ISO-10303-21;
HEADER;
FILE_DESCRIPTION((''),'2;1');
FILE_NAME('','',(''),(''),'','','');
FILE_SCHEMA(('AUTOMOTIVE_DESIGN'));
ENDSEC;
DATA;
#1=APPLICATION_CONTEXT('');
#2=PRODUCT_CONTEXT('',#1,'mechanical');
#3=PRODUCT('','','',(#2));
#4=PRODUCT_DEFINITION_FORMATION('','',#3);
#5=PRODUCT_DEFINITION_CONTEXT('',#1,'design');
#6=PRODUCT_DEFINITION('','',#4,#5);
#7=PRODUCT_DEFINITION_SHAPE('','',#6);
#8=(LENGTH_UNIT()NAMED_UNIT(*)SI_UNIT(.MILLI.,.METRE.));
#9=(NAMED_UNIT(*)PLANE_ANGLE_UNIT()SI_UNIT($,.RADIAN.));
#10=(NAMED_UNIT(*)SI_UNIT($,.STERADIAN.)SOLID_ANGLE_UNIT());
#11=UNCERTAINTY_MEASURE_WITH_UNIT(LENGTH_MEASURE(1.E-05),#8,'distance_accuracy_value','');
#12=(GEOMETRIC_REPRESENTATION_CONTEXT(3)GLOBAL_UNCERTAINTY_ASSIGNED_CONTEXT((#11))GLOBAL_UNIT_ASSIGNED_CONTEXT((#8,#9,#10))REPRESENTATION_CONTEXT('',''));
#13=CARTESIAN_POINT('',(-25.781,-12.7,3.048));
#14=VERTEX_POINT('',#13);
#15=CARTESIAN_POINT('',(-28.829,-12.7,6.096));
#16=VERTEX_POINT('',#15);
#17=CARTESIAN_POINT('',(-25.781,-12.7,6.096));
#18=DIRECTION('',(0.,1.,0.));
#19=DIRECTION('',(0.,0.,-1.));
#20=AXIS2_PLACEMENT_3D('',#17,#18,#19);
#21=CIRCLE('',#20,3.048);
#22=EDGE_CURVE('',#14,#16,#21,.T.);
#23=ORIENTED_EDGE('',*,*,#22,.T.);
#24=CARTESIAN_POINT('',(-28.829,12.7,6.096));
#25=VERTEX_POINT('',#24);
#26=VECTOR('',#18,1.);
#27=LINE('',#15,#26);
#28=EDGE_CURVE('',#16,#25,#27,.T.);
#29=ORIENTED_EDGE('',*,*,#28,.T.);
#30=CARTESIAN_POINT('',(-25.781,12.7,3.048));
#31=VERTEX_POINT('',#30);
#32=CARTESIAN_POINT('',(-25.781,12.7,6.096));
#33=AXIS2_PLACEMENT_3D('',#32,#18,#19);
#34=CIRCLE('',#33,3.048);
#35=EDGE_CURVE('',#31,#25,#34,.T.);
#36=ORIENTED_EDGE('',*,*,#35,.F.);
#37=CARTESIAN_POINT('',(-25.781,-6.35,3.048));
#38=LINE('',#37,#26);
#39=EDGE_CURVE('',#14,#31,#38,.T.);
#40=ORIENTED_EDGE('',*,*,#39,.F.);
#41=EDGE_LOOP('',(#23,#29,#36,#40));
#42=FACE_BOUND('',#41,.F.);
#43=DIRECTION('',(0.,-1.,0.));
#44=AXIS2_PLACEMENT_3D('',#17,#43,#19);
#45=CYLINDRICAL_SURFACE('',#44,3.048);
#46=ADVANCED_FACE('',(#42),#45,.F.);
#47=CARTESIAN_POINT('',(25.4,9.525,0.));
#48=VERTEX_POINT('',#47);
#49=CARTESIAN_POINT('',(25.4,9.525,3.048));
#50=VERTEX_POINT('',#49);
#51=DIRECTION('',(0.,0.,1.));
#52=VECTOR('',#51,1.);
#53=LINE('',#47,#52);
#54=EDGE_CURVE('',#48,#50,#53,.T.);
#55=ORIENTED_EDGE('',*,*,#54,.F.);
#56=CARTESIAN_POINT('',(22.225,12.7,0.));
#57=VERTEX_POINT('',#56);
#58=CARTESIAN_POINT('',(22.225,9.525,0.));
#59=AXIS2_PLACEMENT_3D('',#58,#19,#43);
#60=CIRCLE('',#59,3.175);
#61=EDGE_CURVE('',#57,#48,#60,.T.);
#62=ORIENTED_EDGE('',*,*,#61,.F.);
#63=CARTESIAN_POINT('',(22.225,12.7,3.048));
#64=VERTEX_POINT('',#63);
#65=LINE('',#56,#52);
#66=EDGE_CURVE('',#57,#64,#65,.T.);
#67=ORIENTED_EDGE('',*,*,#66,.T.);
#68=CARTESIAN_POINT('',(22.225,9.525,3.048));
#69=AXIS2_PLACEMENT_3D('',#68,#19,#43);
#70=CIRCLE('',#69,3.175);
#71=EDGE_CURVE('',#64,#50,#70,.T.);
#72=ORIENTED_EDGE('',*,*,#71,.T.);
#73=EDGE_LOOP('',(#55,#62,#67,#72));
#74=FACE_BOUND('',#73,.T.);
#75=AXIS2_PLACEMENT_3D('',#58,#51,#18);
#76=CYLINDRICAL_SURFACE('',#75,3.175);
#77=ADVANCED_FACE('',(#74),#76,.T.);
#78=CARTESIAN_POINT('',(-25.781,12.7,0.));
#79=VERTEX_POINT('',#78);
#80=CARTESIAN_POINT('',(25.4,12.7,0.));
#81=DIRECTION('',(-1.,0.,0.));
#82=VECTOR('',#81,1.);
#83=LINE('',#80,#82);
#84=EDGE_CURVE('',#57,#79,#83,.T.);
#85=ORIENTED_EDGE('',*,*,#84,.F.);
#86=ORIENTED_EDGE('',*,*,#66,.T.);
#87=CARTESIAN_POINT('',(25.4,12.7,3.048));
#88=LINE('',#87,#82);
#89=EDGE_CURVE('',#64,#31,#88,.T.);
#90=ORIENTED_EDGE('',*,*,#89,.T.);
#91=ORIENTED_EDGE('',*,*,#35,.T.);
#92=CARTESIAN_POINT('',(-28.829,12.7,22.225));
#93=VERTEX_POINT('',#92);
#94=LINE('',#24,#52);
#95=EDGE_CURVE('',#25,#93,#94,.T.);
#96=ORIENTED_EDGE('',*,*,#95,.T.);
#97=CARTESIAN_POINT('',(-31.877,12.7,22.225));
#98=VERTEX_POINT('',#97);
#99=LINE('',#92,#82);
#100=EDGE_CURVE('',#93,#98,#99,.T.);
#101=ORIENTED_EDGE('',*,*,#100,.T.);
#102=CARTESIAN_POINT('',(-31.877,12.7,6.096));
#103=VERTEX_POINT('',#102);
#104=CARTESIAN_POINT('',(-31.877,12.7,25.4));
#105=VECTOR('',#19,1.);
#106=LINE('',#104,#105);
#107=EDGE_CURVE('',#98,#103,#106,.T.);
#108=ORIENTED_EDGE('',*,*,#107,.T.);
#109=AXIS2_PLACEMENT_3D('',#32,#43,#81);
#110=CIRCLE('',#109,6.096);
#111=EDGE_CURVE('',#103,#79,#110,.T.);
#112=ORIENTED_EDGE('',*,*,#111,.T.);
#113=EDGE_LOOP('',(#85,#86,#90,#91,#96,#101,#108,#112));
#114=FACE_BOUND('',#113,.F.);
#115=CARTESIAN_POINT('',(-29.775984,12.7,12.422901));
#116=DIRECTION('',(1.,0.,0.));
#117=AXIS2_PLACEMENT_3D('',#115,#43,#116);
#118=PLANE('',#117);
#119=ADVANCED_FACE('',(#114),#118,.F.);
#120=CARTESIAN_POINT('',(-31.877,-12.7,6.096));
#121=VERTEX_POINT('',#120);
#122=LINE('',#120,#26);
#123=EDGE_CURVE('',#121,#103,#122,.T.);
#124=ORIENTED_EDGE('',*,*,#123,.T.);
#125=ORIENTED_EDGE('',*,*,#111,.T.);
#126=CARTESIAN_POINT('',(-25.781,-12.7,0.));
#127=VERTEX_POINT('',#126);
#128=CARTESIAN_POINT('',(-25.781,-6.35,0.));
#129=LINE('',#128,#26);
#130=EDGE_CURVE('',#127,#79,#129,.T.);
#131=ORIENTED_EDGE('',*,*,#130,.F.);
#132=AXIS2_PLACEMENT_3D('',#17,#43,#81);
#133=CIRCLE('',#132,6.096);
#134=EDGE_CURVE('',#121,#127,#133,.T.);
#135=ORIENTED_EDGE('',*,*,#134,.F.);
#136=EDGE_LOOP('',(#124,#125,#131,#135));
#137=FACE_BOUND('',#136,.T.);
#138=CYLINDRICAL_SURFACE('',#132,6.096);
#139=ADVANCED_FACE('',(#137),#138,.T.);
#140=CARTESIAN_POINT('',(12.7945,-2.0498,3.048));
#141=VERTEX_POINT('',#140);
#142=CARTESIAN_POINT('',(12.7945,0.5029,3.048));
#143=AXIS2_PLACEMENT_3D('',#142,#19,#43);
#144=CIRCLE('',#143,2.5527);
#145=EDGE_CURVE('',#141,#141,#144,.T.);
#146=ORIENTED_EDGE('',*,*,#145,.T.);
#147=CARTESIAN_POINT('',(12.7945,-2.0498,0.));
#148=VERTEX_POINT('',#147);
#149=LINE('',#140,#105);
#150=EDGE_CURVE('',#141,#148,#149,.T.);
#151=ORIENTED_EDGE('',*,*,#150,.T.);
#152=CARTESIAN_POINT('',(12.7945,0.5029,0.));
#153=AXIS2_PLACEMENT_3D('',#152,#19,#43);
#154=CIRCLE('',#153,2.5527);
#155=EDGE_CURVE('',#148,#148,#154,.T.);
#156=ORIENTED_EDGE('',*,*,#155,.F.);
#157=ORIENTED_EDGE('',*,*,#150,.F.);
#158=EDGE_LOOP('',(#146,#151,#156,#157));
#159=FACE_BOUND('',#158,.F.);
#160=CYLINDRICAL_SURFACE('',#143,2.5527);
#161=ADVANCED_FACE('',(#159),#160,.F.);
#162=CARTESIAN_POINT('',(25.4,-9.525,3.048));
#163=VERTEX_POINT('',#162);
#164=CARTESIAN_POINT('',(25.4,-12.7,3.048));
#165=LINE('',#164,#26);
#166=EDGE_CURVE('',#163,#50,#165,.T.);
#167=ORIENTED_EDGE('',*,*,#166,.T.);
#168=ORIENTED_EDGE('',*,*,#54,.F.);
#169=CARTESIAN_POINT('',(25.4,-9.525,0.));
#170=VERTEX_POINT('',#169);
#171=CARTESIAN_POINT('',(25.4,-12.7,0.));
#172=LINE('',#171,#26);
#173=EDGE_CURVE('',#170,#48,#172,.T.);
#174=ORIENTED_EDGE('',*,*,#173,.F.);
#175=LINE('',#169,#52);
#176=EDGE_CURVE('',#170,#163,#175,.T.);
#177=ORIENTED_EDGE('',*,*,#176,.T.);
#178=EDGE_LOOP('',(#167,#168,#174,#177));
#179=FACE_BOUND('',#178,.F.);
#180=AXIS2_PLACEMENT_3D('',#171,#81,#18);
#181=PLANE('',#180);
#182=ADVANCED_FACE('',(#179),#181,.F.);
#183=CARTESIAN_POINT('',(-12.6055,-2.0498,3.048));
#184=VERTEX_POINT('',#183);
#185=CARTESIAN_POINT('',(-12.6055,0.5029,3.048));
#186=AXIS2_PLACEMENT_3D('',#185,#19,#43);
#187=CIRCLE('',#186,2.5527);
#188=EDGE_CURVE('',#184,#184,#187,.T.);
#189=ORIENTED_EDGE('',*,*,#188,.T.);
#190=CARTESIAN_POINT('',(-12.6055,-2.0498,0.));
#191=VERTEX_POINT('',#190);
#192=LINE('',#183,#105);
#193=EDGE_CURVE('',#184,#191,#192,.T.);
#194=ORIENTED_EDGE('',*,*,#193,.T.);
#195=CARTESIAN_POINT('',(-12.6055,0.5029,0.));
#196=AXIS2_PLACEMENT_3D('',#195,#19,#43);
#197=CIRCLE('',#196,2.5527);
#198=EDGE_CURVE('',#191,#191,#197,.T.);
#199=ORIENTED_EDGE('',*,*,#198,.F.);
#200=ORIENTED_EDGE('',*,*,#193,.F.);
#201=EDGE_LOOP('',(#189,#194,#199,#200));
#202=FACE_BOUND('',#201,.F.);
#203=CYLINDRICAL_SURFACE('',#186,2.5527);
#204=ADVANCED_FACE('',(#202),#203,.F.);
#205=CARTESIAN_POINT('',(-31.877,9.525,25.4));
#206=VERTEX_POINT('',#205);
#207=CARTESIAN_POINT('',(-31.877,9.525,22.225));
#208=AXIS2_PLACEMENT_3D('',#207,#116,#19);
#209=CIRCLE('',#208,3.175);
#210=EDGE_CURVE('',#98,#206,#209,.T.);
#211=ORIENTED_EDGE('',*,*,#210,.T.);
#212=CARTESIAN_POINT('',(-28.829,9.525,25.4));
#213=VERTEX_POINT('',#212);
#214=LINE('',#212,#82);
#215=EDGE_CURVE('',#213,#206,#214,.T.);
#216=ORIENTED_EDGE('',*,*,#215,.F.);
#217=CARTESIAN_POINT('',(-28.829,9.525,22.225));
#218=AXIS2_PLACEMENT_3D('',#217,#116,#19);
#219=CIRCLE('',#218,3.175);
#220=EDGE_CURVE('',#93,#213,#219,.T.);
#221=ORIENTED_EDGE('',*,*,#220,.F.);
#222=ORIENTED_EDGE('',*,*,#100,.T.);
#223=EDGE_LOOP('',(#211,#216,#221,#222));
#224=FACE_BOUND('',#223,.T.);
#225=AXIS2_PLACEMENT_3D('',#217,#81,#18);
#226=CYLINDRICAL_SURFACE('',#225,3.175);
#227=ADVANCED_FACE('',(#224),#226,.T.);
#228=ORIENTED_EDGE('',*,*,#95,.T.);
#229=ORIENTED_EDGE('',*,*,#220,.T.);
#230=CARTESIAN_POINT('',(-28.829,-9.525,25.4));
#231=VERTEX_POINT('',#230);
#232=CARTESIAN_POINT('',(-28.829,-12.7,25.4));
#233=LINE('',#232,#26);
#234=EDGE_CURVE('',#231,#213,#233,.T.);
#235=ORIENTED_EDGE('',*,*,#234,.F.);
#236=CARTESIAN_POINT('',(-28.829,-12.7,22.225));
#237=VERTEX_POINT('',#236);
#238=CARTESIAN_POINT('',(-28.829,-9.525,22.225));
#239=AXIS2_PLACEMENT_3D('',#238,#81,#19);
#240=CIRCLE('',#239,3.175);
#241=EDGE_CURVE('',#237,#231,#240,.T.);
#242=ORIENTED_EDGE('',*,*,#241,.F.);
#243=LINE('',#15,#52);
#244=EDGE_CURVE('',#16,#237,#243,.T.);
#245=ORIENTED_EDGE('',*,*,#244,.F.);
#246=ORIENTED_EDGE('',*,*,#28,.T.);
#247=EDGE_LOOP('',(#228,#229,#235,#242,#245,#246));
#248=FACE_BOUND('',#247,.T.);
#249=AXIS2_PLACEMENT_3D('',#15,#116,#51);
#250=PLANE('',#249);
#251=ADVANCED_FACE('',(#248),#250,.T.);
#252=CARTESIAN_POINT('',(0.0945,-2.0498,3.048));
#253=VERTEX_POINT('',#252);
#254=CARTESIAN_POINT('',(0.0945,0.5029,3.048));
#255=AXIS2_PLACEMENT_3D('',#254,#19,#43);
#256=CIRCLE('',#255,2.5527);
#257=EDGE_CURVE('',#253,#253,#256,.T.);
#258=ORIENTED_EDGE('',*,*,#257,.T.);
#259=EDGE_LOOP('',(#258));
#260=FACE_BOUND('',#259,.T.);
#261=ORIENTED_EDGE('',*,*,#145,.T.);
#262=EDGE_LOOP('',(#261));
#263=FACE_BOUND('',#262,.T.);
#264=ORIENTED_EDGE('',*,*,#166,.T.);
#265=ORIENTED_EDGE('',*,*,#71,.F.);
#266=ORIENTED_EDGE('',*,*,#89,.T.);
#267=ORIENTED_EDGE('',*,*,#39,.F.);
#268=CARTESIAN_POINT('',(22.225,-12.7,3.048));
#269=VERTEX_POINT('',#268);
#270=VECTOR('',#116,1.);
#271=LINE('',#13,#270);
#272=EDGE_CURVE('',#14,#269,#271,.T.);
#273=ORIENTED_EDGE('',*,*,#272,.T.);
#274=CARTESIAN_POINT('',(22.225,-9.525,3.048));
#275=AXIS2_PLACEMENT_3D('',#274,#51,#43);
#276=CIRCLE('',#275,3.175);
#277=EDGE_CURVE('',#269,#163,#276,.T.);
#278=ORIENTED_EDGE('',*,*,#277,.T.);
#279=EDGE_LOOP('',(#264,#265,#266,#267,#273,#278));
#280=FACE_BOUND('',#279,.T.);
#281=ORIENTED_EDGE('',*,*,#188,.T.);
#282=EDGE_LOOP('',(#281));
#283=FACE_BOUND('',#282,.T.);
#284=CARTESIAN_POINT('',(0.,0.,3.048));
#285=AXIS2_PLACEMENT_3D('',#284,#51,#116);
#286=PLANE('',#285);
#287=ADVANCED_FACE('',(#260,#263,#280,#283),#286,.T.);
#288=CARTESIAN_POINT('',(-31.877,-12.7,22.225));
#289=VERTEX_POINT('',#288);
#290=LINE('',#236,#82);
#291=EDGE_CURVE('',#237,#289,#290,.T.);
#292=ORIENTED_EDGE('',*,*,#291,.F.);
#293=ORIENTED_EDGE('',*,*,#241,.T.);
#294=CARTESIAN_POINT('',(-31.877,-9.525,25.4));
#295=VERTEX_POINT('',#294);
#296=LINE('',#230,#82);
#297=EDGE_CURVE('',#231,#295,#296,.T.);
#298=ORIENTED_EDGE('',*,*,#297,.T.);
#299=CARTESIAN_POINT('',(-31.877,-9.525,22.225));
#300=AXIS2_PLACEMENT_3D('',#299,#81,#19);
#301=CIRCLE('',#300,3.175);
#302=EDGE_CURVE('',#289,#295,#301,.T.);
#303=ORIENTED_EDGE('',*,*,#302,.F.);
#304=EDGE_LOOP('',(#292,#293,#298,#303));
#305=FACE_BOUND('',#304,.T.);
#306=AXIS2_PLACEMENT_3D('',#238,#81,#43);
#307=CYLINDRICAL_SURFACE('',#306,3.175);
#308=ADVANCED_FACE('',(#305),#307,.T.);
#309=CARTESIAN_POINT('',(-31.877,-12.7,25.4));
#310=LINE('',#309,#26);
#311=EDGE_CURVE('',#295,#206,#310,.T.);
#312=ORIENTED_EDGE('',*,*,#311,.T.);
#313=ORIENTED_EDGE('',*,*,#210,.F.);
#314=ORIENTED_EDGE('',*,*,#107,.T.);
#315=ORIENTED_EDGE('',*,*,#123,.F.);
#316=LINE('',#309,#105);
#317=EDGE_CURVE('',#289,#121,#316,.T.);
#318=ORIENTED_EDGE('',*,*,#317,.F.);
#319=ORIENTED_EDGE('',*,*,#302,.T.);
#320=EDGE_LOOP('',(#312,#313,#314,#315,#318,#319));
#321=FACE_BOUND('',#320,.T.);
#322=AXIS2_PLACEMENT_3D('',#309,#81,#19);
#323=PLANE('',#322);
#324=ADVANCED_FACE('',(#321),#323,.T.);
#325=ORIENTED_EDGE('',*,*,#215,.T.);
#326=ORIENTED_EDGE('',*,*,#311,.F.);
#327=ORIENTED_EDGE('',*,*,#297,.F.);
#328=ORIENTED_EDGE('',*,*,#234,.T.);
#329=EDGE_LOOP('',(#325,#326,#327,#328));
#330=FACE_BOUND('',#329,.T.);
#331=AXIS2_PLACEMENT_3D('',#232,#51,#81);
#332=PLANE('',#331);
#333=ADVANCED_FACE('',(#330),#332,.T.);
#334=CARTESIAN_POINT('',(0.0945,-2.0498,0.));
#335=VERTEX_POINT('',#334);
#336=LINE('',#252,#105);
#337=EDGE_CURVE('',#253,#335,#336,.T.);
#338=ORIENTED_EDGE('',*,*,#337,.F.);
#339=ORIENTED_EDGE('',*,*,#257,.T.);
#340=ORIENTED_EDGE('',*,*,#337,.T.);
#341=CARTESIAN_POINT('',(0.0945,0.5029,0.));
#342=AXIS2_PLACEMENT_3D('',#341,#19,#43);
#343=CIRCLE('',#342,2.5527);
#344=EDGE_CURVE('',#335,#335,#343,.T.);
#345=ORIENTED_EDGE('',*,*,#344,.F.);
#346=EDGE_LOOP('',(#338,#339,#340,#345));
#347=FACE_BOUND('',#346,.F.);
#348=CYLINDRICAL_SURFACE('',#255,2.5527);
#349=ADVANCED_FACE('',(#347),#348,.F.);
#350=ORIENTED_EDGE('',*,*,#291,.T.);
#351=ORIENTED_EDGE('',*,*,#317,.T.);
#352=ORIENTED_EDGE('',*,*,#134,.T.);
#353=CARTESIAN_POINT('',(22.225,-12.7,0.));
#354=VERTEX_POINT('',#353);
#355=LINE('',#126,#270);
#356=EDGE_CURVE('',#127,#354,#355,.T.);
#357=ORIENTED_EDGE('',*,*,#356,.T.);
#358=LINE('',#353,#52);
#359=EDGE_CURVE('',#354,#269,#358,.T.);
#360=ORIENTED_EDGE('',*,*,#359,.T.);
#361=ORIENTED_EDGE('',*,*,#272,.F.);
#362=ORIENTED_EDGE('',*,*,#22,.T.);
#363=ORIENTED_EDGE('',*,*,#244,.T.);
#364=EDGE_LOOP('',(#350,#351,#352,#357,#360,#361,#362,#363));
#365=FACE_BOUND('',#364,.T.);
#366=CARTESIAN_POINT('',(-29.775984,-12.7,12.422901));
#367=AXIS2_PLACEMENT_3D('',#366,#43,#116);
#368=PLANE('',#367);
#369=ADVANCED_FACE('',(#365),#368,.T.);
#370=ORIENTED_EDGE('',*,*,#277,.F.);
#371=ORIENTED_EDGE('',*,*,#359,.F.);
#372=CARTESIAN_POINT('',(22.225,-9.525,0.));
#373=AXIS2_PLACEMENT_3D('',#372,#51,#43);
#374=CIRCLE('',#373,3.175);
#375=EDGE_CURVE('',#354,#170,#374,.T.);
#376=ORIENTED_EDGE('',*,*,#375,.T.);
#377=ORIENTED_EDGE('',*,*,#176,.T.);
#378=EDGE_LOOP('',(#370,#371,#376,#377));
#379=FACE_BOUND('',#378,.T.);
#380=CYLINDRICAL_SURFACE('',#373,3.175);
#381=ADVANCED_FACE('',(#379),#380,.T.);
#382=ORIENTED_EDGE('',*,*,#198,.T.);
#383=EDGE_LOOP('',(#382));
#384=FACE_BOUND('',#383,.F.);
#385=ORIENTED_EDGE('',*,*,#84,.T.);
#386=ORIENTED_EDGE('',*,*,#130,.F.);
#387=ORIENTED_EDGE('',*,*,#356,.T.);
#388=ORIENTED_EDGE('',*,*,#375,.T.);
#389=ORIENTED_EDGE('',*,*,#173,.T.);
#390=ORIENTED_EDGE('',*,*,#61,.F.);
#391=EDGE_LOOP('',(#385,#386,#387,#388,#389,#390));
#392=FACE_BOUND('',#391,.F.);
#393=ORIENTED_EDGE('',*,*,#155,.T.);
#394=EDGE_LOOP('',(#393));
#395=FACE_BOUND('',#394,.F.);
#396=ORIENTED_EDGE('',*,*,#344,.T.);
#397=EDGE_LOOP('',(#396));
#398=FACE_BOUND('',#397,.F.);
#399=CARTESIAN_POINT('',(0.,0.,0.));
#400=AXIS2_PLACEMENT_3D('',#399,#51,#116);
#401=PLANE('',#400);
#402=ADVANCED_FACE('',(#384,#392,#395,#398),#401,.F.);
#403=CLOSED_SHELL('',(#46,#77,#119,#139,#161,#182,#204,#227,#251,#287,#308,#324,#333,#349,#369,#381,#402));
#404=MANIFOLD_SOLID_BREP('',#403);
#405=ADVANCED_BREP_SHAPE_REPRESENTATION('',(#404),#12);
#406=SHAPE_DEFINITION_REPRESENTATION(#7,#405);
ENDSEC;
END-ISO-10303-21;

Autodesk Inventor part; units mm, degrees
ref_plane "YZ Plane" through (0, 0, 0) normal (1, 0, 0) x (0, 1, 0)
ref_plane "XZ Plane" through (0, 0, 0) normal (0, 1, 0) x (-1, 0, 0)
ref_plane "XY Plane" through (0, 0, 0) normal (0, 0, 1) x (1, 0, 0)
sketch "Sketch1" plane through (0, 0, 0) normal (0, 0, 1) x (1, 0, 0)
  line L0 (25.4, 12.7) -> (-25.4, 12.7)
  line L1 (-25.4, 12.7) -> (-25.4, -12.7) construction
  line L2 (-25.4, -12.7) -> (25.4, -12.7)
  line L3 (25.4, -12.7) -> (25.4, 12.7)
  line L4 (25.4, 12.7) -> (-25.4, -12.7) construction
  line L5 (-25.4, 12.7) -> (25.4, -12.7) construction
  line L6 (-25.4, -12.7) -> (-28.829, -12.7)
  line L7 (-28.829, -12.7) -> (-28.829, 12.7)
  line L8 (-28.829, 12.7) -> (-25.4, 12.7)
  point P0 (0, 0)
  dimension "d0" = 25.4
  dimension "d1" = 50.8
  dimension "d2" = 3.429
extrude "Plate1" add sketch "Sketch1" along normal blind 3.048
sketch "Sketch2" plane through (-28.829, -12.7, 3.048) normal (-1, 0, 0) x (0, -1, 0)
  line L0 (-25.4, 0) -> (0, 0)
  line L1 (0, 0) -> (0, 22.352)
  line L2 (0, 22.352) -> (-25.4, 22.352)
  line L3 (-25.4, 22.352) -> (-25.4, 0)
edge flange "Flange1" height 25.4 angle 90 thickness 3.048 bend radius 3.048 thickness toward (-1, 0, 0) relief tear relief width 3.048 relief depth 1.524 edges at (-28.829, 0, 3.048) wall of the first edge with corners at (-28.829, 12.7, 3.048) (-28.829, -12.7, 3.048) (-28.829, -12.7, 25.4) (-28.829, 12.7, 25.4)
bend "Bend1"
corner "Corner1"
sketch "Sketch3" plane through (0, 0, 3.048) normal (0, 0, 1) x (1, 0, 0)
  point P0 (0, 0)
  point P1 (0.0945, 0.5029)
hole "Hole1" at (0.0945, 0.5029, 3.048) direction (0, 0, -1) diameter 5.1054 end through all clearance for "Flat Head Machine Screw (82)" size "#10" standard "Ansi Unified Screw Threads"
pattern_linear "Rectangular Pattern1" count 3 spacing 12.7 along (1, 0, 0) of "Hole1" first direction both ways yes
fillet "Corner Round1" radius 3.175 4 edges at (25.4, -12.7, 1.524) (25.4, 12.7, 1.524) (-30.353, 12.7, 25.4) (-30.353, -12.7, 25.4)
equation "\"d19\" = Thickness"
equation "\"d3\" = Thickness"
equation "\"d4\" = BendReliefWidth"
equation "\"d5\" = BendReliefDepth"
equation "\"d6\" = MinimumRemnant"
equation "\"d7\" = TransitionRadius"
equation "\"d10\" = BendRadius"
equation "\"d11\" = CornerReliefSize"
equation "\"d12\" = GapSize"
equation "\"d13\" = JacobiRadiusSize"
equation "\"BendRadius\" = Thickness"
equation "\"BendReliefWidth\" = Thickness"
equation "\"BendReliefDepth\" = 0.5 * Thickness"
equation "\"CornerReliefSize\" = 4 * Thickness"
equation "\"MinimumRemnant\" = 2 * Thickness"
equation "\"TransitionRadius\" = BendRadius"
equation "\"JacobiRadiusSize\" = BendRadius"
equation "\"GapSize\" = Thickness"
equation "\"Thickness\" = 3.048"
properties part number "MOUNT,FLANGE,BELLYPAN" material "Steel, Alloy"
